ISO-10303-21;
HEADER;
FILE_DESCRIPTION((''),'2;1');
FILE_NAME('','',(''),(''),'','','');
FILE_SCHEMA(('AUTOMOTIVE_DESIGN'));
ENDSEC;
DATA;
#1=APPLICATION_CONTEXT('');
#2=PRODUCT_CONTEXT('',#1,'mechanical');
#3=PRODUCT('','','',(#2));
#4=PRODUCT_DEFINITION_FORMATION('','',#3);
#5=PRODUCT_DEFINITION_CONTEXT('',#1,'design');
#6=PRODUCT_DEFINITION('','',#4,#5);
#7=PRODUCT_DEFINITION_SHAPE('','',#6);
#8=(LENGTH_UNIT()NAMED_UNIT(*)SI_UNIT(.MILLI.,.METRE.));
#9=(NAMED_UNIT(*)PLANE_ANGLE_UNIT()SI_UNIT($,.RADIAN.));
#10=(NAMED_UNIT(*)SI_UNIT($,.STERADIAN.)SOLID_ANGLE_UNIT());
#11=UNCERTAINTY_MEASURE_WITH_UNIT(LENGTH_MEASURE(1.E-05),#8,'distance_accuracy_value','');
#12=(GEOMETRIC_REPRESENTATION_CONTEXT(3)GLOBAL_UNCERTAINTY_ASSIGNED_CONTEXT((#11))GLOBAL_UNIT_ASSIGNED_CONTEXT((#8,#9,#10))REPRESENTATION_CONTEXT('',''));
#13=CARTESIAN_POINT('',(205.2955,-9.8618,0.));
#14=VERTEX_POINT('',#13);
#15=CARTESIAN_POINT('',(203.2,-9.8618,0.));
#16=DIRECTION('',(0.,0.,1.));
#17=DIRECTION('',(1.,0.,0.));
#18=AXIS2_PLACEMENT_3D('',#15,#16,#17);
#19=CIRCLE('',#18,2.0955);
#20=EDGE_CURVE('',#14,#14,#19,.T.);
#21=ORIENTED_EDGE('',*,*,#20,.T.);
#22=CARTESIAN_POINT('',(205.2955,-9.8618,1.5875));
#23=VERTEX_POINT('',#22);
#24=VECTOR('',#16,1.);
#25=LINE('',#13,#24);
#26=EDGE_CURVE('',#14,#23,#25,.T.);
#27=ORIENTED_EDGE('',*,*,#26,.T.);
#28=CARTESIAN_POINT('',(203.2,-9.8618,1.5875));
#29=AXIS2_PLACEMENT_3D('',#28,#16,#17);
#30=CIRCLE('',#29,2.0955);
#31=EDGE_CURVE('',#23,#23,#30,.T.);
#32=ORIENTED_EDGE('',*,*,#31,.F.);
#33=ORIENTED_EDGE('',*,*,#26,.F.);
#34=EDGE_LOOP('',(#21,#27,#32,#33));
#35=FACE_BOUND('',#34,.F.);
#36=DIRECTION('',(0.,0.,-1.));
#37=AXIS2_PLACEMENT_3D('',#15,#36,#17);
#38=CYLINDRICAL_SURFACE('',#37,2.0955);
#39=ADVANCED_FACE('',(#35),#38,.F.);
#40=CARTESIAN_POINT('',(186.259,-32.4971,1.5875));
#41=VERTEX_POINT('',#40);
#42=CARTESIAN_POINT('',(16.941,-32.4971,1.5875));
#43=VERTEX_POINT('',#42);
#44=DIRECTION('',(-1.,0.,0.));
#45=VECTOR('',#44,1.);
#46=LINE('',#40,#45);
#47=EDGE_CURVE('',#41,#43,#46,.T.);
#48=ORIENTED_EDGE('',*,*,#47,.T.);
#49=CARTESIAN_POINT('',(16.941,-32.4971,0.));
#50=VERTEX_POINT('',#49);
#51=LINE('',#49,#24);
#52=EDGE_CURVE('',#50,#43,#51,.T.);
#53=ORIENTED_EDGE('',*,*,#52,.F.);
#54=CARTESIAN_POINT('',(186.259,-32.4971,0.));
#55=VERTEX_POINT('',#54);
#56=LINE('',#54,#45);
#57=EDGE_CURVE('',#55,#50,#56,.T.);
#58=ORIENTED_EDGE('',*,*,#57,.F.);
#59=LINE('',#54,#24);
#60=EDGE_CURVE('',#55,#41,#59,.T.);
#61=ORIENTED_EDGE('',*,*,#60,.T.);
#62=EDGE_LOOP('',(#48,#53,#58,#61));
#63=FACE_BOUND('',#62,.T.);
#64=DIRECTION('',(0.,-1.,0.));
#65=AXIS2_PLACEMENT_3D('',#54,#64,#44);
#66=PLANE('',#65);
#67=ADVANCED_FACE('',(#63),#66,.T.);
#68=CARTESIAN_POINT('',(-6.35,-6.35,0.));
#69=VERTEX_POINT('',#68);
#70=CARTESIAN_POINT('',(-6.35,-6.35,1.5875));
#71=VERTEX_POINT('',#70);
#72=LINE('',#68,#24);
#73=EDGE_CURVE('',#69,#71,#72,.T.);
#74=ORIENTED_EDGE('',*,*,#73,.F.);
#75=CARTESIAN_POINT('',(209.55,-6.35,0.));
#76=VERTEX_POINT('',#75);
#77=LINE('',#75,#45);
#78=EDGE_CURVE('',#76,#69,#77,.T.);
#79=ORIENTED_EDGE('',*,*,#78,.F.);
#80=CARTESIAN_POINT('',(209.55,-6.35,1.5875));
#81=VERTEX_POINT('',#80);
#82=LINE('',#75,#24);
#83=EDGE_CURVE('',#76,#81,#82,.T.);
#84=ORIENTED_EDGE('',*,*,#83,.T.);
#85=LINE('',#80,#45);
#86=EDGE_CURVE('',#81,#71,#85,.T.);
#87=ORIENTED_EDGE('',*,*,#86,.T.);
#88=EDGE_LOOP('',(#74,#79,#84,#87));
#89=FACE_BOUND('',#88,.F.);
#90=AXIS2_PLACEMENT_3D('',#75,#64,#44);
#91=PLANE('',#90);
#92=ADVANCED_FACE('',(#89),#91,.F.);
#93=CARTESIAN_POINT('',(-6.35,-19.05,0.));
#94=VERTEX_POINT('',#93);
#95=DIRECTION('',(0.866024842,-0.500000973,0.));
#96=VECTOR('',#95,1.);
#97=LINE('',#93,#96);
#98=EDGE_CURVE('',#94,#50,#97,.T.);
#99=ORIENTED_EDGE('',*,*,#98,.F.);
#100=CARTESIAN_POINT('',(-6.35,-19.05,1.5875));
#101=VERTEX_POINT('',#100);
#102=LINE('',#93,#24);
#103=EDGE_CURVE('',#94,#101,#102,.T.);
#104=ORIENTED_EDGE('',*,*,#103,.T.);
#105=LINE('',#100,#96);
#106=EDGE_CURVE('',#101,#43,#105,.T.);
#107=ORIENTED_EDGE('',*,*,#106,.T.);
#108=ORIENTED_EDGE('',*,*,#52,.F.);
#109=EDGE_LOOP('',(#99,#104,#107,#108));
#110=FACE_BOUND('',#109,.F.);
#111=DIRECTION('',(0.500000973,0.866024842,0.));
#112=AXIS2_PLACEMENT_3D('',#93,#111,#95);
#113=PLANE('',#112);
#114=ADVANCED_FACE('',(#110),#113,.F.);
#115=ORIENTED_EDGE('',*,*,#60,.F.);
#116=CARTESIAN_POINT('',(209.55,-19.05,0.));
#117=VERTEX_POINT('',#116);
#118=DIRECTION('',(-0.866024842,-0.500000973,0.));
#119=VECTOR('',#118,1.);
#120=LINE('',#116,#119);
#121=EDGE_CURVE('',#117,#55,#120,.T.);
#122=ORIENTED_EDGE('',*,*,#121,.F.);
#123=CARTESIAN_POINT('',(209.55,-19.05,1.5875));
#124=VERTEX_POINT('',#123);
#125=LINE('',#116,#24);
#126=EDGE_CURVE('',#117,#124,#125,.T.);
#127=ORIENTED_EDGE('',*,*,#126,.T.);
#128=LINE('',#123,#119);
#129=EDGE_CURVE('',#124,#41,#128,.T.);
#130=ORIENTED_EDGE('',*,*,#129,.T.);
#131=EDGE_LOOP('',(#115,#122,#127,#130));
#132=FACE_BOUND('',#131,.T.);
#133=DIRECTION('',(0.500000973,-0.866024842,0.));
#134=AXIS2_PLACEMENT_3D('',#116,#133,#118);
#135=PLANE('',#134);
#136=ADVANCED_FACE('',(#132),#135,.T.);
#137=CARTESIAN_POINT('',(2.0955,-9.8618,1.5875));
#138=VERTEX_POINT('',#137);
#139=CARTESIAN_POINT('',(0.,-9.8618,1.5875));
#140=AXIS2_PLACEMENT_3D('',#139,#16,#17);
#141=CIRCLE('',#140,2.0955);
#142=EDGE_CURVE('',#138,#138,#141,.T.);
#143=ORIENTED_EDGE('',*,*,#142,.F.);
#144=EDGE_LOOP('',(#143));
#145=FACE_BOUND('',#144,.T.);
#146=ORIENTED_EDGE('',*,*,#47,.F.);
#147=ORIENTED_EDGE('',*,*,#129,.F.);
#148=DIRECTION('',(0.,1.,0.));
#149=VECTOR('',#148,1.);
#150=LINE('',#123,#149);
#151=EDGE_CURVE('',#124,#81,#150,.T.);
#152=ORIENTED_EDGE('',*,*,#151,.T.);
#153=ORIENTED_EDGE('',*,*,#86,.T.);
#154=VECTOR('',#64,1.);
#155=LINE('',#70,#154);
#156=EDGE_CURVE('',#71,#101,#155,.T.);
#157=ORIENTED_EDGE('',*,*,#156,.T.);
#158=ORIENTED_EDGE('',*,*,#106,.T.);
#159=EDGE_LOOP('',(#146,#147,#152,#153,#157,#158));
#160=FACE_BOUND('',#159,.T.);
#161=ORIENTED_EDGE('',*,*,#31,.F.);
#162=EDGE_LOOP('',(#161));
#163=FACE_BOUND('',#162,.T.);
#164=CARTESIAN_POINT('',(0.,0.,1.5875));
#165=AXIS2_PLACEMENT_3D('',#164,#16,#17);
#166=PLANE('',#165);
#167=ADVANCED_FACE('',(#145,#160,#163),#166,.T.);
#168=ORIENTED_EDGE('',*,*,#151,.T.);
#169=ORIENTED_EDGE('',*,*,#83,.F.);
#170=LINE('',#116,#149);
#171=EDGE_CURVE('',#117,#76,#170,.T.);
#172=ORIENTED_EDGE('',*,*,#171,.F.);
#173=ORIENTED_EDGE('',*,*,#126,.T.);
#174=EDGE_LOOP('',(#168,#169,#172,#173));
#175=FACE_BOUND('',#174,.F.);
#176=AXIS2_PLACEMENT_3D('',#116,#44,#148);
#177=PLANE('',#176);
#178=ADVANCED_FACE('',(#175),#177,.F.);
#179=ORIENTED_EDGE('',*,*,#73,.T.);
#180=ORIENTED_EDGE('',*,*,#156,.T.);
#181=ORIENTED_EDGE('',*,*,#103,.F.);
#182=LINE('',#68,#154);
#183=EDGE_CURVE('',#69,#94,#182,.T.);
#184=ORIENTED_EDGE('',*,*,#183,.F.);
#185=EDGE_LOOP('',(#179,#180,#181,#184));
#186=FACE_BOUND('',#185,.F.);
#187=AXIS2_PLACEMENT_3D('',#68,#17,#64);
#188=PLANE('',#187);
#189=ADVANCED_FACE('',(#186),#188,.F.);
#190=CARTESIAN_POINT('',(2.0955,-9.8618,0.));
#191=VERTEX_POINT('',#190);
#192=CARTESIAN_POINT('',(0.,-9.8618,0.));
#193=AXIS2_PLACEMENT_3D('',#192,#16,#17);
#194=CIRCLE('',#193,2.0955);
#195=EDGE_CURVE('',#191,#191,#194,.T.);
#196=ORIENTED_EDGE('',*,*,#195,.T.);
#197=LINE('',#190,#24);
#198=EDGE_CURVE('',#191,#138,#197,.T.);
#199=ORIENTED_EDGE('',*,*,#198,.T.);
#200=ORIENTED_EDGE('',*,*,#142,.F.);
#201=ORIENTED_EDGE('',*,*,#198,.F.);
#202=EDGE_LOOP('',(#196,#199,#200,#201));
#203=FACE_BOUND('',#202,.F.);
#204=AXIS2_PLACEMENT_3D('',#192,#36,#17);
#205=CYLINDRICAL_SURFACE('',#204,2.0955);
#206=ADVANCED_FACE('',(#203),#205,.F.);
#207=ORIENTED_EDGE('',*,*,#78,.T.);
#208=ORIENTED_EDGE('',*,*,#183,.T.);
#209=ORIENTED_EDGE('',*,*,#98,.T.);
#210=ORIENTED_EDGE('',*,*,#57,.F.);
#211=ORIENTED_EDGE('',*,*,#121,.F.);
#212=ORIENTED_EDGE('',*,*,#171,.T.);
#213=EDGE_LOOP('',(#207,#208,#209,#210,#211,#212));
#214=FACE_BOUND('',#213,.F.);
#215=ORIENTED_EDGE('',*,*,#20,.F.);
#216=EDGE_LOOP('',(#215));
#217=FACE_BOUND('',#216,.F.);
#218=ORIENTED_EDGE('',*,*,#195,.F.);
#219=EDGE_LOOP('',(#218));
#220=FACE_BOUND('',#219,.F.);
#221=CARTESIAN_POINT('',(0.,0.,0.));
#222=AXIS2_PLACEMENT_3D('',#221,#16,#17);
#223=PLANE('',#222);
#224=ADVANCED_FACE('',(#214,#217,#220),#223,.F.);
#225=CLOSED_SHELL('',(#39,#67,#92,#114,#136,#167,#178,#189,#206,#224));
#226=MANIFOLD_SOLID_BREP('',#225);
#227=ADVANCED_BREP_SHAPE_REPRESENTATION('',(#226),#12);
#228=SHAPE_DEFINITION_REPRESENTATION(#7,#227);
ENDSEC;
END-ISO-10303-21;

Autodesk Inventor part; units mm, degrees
ref_plane "YZ Plane" through (0, 0, 0) normal (1, 0, 0) x (0, 1, 0)
ref_plane "XZ Plane" through (0, 0, 0) normal (0, 1, 0) x (-1, 0, 0)
ref_plane "XY Plane" through (0, 0, 0) normal (0, 0, 1) x (1, 0, 0)
sketch "Block1" plane through (0, 0, 0) normal (0, 0, 1) x (1, 0, 0)
  line L0 (-105.9874, 13.2259) -> (-105.9874, 0.5259)
  line L1 (109.9126, 13.2259) -> (-105.9874, 13.2259)
  line L2 (109.9126, 0.5259) -> (109.9126, 13.2259)
  line L3 (86.6216, -12.9211) -> (-82.6964, -12.9211)
  line L4 (-105.9874, 0.5259) -> (-82.6964, -12.9211)
  line L5 (109.9126, 0.5259) -> (86.6216, -12.9211)
  circle A0 centre (-99.6374, 9.7141) radius 2.0955
  circle A1 centre (103.5626, 9.7141) radius 2.0955
  point P0 (3.9065, 11.282)
  dimension "d30" = 4.191
  dimension "d31" = 4.191
sketch "Sketch1" plane through (0, 0, 0) normal (0, 0, 1) x (1, 0, 0)
  line L0 (-6.35, -6.35) -> (-6.35, -19.05)
  line L1 (209.55, -6.35) -> (-6.35, -6.35)
  line L2 (209.55, -19.05) -> (209.55, -6.35)
  line L3 (186.259, -32.4971) -> (16.941, -32.4971)
  line L4 (-6.35, -19.05) -> (16.941, -32.4971)
  line L5 (209.55, -19.05) -> (186.259, -32.4971)
  circle A0 centre (0, -9.8618) radius 2.0955
  circle A1 centre (203.2, -9.8618) radius 2.0955
  point P0 (0, 0)
extrude "Extrusion1" add sketch "Sketch1" along normal blind 1.5875
feature "Bend Part1" [suppressed]
equation "\"BendRadius\" = Thickness"
equation "\"BendReliefWidth\" = Thickness"
equation "\"BendReliefDepth\" = 0.5 * Thickness"
equation "\"CornerReliefSize\" = 4 * Thickness"
equation "\"MinimumRemnant\" = 2 * Thickness"
equation "\"TransitionRadius\" = BendRadius"
equation "\"JacobiRadiusSize\" = BendRadius"
equation "\"GapSize\" = Thickness"
equation "\"Thickness\" = 1.5875"
properties part number "wedge" material "Acetal Resin, White"
